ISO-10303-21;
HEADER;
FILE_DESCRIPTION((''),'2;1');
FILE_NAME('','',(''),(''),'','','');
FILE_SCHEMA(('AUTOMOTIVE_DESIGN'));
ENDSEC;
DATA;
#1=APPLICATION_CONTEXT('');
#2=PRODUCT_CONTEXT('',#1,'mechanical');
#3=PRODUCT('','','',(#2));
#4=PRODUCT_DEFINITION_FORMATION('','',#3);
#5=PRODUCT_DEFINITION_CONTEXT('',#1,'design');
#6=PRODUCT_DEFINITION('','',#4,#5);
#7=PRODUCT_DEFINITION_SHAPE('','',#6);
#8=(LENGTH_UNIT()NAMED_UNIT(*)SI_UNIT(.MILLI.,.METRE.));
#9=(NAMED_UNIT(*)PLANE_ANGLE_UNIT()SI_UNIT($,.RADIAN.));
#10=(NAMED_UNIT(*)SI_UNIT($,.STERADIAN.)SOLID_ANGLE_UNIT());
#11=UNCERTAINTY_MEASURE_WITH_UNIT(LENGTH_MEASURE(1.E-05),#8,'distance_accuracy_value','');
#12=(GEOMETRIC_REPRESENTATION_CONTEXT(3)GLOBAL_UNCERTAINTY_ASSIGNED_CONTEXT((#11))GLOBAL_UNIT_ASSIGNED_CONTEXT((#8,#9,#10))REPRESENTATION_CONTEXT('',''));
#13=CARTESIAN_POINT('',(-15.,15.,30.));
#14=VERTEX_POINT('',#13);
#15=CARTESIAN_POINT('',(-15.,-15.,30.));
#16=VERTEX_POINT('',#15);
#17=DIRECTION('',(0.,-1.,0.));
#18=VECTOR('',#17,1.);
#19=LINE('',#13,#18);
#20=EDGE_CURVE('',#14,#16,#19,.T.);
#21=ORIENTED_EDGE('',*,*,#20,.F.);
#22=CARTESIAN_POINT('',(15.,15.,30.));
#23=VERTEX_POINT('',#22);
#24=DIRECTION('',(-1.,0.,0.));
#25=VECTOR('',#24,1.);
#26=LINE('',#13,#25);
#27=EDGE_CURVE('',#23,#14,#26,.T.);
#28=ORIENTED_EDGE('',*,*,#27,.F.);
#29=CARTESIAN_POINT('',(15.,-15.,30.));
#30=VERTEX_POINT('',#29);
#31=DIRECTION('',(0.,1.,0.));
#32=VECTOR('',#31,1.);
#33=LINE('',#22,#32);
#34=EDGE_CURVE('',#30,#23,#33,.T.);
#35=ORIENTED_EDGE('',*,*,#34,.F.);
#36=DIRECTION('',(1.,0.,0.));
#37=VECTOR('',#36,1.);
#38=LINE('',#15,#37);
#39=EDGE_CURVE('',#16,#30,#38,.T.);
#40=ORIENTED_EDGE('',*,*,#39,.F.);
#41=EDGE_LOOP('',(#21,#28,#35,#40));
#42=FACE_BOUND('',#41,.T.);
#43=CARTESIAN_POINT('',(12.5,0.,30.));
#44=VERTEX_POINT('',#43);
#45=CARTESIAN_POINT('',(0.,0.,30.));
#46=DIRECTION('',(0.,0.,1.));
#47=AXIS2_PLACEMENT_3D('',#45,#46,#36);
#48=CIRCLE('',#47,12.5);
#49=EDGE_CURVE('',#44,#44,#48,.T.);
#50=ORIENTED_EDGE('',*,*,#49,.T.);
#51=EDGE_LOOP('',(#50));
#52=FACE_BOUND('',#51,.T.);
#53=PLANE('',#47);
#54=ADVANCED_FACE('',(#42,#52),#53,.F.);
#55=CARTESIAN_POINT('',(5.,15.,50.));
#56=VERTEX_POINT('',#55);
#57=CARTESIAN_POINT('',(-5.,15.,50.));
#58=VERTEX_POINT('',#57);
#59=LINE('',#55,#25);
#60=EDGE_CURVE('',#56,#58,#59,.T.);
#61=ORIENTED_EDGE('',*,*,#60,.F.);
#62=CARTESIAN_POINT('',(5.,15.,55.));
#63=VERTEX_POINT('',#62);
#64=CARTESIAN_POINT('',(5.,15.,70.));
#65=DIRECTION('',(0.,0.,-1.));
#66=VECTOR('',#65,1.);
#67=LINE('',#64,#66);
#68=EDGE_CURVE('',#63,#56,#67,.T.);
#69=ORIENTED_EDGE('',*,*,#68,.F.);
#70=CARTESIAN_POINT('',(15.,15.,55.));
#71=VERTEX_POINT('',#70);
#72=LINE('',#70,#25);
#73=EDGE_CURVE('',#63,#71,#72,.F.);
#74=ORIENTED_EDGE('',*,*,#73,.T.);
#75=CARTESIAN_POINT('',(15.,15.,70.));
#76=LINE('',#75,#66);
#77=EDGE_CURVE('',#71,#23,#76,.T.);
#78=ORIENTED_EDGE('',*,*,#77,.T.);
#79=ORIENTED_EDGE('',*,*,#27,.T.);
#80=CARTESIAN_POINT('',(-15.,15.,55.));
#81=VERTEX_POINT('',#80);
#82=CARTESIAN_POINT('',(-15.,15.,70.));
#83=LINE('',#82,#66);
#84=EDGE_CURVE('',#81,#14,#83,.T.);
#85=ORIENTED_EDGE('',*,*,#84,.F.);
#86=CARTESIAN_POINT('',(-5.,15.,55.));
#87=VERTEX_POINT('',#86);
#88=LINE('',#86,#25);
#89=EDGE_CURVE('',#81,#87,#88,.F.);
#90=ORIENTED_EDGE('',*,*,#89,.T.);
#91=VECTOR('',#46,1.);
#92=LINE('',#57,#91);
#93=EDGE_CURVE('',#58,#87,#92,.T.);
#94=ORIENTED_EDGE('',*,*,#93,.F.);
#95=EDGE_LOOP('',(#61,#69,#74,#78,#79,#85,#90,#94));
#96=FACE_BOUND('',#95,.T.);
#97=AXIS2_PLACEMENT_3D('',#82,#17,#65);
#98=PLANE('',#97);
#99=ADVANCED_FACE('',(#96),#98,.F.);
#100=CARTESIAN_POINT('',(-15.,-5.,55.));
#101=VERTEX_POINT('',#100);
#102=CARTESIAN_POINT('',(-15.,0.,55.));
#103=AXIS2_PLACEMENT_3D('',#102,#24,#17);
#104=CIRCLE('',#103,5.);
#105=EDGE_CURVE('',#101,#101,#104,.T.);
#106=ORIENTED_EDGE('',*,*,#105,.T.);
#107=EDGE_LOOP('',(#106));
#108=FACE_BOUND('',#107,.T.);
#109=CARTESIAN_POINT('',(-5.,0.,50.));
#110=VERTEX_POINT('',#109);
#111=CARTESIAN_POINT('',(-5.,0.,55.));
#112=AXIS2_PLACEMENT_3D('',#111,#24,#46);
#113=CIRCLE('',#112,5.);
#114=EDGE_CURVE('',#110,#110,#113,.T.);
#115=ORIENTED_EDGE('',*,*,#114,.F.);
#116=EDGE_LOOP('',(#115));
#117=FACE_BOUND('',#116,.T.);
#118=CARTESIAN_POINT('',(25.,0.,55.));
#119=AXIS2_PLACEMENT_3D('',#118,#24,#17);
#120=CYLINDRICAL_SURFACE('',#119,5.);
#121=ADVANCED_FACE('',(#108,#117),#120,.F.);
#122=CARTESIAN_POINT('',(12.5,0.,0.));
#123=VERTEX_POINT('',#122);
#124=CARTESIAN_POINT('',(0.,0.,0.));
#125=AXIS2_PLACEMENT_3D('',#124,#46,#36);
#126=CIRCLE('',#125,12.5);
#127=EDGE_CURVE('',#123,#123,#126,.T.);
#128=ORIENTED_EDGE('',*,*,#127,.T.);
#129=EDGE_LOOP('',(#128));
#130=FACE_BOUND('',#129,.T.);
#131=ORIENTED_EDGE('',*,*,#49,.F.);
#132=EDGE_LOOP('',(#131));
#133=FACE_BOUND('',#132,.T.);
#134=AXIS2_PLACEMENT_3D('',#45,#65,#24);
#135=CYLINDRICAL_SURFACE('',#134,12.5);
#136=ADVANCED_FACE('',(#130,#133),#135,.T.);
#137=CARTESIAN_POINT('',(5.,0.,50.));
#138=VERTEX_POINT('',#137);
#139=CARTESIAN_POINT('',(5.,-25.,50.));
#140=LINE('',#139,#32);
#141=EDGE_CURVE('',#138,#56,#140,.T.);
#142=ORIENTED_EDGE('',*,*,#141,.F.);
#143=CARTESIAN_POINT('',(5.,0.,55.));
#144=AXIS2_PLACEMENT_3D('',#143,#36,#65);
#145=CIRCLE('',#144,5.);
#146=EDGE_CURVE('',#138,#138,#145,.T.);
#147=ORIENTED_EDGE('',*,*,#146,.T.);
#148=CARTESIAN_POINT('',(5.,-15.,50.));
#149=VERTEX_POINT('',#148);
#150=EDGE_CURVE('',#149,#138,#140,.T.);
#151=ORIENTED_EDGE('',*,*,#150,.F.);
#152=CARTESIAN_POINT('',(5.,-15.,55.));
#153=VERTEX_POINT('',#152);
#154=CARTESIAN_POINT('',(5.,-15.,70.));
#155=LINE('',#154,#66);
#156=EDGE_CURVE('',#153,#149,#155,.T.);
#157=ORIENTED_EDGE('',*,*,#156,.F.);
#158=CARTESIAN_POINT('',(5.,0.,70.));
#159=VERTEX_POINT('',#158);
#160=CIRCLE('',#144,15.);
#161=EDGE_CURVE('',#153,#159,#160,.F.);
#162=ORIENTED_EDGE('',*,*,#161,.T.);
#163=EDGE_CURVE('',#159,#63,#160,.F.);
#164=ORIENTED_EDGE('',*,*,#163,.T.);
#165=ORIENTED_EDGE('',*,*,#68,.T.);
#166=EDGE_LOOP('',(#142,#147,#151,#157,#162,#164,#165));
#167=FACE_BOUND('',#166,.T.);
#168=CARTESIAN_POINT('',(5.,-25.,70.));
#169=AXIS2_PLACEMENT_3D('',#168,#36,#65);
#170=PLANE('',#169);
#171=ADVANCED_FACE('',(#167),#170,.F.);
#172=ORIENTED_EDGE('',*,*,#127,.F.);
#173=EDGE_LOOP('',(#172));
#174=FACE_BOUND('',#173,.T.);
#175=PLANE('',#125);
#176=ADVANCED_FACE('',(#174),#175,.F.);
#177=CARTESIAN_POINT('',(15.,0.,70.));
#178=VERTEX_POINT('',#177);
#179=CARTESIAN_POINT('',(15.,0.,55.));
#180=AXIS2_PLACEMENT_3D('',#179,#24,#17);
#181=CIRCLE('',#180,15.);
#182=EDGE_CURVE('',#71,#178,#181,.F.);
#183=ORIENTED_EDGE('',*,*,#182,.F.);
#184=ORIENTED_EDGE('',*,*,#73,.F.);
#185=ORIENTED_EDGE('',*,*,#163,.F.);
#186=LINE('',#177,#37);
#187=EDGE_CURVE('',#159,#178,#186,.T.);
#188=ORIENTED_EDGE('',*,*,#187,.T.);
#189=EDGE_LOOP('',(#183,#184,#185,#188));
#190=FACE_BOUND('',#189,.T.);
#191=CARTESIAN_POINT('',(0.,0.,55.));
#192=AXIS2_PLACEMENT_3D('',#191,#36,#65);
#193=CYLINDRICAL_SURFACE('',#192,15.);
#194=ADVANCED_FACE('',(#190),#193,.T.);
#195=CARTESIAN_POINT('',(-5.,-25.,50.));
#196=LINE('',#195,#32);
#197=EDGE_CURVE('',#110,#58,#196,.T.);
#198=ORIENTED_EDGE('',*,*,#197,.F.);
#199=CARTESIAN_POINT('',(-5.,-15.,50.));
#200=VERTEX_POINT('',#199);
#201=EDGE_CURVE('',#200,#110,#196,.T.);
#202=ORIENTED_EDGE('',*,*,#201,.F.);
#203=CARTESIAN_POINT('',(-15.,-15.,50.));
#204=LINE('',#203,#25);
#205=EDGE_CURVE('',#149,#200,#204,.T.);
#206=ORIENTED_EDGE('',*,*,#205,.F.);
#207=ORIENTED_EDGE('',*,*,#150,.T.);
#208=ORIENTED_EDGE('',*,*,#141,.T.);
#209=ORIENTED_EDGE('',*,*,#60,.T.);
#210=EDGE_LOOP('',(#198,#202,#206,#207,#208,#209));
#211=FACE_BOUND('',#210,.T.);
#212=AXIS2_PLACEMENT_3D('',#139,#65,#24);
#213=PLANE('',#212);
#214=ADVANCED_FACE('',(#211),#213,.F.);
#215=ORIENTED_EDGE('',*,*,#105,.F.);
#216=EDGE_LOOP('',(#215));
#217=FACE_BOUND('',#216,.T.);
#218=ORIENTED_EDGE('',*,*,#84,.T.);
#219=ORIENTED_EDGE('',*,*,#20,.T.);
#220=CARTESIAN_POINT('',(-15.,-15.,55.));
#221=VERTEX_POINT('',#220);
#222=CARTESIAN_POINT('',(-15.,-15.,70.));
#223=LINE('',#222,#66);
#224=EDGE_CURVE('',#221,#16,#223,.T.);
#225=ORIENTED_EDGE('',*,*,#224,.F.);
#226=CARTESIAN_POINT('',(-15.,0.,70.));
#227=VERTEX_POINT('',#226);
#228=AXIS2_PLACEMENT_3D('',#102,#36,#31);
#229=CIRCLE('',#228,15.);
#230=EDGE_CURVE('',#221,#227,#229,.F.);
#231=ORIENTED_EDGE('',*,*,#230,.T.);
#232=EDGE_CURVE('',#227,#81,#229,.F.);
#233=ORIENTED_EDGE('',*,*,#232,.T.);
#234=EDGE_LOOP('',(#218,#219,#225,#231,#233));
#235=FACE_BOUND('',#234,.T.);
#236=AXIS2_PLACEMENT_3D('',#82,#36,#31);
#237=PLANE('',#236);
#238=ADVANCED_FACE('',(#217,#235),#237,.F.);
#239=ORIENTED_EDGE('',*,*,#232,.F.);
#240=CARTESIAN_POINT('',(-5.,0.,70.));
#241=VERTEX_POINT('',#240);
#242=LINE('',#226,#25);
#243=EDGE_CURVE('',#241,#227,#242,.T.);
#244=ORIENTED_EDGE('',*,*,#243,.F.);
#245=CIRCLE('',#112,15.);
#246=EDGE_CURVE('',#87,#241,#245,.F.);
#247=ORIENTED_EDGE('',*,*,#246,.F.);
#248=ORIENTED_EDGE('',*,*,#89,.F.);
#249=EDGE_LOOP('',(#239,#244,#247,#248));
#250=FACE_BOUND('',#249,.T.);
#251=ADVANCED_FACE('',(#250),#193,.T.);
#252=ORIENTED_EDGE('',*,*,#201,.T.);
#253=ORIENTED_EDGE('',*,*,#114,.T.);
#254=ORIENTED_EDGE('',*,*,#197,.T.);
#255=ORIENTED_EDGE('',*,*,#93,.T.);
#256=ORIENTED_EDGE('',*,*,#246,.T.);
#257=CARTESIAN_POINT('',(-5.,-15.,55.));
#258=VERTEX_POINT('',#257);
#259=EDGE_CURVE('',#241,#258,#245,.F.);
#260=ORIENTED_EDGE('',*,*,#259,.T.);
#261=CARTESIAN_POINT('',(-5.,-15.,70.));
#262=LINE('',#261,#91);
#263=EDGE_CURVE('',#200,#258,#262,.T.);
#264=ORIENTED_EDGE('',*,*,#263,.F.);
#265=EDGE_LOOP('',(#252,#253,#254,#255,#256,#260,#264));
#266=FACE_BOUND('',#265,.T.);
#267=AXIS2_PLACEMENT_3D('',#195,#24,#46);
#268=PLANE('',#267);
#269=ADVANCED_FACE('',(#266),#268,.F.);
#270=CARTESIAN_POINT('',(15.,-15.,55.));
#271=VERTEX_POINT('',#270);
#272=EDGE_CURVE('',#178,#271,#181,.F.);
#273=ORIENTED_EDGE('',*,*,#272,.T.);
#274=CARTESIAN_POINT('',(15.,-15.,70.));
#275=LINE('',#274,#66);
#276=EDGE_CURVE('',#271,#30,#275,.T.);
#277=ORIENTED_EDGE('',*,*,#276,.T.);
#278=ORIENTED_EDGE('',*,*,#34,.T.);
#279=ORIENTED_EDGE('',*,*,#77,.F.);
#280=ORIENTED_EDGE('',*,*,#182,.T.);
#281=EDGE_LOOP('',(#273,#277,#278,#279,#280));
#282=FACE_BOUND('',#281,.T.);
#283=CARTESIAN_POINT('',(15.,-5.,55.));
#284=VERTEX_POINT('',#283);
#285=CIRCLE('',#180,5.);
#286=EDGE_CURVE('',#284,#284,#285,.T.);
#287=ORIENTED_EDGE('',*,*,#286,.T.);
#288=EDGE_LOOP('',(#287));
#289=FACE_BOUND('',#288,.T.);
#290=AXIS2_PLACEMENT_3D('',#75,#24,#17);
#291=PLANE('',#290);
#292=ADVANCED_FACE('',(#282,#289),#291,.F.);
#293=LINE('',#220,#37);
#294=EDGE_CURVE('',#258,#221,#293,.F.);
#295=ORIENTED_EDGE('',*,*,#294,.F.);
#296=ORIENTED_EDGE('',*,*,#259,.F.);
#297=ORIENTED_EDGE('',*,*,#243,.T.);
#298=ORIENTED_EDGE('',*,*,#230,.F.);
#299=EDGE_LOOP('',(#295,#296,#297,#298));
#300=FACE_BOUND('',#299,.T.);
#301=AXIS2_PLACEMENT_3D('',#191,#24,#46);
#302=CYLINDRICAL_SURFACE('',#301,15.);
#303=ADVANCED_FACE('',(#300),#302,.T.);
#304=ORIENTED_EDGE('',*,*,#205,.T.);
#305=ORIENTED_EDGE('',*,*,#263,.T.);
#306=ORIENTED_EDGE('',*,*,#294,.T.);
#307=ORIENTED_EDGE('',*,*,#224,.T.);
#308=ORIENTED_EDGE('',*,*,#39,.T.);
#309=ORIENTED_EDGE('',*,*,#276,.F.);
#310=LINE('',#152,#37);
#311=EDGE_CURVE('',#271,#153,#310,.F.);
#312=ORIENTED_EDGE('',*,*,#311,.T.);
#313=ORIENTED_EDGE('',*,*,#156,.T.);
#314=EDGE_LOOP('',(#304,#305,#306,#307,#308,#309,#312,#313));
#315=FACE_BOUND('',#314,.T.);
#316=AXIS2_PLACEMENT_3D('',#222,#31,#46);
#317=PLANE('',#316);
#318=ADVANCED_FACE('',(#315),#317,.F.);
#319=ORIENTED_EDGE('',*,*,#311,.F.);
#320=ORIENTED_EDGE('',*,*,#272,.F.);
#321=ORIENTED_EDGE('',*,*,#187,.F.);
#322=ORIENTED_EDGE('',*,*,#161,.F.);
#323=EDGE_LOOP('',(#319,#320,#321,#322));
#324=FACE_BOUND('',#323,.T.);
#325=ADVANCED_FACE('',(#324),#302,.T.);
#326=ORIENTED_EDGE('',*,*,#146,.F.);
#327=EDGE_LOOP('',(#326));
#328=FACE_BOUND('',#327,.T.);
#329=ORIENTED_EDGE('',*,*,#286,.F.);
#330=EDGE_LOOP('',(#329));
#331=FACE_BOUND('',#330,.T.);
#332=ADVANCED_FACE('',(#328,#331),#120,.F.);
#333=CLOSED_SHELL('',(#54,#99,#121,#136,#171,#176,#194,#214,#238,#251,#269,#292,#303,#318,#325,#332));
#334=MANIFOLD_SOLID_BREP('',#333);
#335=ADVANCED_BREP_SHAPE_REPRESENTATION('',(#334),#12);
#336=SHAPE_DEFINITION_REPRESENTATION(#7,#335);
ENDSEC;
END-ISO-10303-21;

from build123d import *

# Parameters (mm, degrees)
SKETCH2_R           = 12.5
BOSS_EXTRUDE1_DEPTH = 30
SKETCH3_W           = 30
SKETCH3_H           = 30
BOSS_EXTRUDE2_DEPTH = 40
SKETCH4_W           = 10
SKETCH4_H           = 20
CUT_EXTRUDE1_DEPTH  = 40
FILLET1_R           = 15
SKETCH5_R           = 5
CUT_EXTRUDE2_DEPTH  = 40


with BuildPart() as part:
    # Sketch2 → Boss-Extrude1 (new body)
    with BuildSketch(Plane.XY):
        Circle(SKETCH2_R)
    extrude(amount=BOSS_EXTRUDE1_DEPTH)

    # Sketch3 → Boss-Extrude2 (add)
    with BuildSketch(Plane.XY.offset(30)):
        Rectangle(SKETCH3_W, SKETCH3_H)
    extrude(amount=BOSS_EXTRUDE2_DEPTH)

    # Sketch4 → Cut-Extrude1 (cut)
    with BuildSketch(Plane(origin=(0, 15, 0), x_dir=(1, 0, 0), z_dir=(0, 1, 0))):
        with Locations((0, -60)):
            Rectangle(SKETCH4_W, SKETCH4_H)
    extrude(amount=-CUT_EXTRUDE1_DEPTH, mode=Mode.SUBTRACT)

    # Fillet1
    fillet1_edges = [part.edges().sort_by_distance(p)[0] for p in [
        (10, 15, 70),
        (10, -15, 70),
        (-10, -15, 70),
        (-10, 15, 70),
    ]]
    fillet(fillet1_edges, radius=FILLET1_R - 0.0001)  # a hair under: the kernel refuses the full size

    # Sketch5 → Cut-Extrude2 (cut)
    with BuildSketch(Plane.ZY.offset(15)):
        with Locations(Location((55, 0, 0), (0, 0, 270))):
            Circle(SKETCH5_R)
    extrude(amount=-CUT_EXTRUDE2_DEPTH, mode=Mode.SUBTRACT)


solid = part.part
